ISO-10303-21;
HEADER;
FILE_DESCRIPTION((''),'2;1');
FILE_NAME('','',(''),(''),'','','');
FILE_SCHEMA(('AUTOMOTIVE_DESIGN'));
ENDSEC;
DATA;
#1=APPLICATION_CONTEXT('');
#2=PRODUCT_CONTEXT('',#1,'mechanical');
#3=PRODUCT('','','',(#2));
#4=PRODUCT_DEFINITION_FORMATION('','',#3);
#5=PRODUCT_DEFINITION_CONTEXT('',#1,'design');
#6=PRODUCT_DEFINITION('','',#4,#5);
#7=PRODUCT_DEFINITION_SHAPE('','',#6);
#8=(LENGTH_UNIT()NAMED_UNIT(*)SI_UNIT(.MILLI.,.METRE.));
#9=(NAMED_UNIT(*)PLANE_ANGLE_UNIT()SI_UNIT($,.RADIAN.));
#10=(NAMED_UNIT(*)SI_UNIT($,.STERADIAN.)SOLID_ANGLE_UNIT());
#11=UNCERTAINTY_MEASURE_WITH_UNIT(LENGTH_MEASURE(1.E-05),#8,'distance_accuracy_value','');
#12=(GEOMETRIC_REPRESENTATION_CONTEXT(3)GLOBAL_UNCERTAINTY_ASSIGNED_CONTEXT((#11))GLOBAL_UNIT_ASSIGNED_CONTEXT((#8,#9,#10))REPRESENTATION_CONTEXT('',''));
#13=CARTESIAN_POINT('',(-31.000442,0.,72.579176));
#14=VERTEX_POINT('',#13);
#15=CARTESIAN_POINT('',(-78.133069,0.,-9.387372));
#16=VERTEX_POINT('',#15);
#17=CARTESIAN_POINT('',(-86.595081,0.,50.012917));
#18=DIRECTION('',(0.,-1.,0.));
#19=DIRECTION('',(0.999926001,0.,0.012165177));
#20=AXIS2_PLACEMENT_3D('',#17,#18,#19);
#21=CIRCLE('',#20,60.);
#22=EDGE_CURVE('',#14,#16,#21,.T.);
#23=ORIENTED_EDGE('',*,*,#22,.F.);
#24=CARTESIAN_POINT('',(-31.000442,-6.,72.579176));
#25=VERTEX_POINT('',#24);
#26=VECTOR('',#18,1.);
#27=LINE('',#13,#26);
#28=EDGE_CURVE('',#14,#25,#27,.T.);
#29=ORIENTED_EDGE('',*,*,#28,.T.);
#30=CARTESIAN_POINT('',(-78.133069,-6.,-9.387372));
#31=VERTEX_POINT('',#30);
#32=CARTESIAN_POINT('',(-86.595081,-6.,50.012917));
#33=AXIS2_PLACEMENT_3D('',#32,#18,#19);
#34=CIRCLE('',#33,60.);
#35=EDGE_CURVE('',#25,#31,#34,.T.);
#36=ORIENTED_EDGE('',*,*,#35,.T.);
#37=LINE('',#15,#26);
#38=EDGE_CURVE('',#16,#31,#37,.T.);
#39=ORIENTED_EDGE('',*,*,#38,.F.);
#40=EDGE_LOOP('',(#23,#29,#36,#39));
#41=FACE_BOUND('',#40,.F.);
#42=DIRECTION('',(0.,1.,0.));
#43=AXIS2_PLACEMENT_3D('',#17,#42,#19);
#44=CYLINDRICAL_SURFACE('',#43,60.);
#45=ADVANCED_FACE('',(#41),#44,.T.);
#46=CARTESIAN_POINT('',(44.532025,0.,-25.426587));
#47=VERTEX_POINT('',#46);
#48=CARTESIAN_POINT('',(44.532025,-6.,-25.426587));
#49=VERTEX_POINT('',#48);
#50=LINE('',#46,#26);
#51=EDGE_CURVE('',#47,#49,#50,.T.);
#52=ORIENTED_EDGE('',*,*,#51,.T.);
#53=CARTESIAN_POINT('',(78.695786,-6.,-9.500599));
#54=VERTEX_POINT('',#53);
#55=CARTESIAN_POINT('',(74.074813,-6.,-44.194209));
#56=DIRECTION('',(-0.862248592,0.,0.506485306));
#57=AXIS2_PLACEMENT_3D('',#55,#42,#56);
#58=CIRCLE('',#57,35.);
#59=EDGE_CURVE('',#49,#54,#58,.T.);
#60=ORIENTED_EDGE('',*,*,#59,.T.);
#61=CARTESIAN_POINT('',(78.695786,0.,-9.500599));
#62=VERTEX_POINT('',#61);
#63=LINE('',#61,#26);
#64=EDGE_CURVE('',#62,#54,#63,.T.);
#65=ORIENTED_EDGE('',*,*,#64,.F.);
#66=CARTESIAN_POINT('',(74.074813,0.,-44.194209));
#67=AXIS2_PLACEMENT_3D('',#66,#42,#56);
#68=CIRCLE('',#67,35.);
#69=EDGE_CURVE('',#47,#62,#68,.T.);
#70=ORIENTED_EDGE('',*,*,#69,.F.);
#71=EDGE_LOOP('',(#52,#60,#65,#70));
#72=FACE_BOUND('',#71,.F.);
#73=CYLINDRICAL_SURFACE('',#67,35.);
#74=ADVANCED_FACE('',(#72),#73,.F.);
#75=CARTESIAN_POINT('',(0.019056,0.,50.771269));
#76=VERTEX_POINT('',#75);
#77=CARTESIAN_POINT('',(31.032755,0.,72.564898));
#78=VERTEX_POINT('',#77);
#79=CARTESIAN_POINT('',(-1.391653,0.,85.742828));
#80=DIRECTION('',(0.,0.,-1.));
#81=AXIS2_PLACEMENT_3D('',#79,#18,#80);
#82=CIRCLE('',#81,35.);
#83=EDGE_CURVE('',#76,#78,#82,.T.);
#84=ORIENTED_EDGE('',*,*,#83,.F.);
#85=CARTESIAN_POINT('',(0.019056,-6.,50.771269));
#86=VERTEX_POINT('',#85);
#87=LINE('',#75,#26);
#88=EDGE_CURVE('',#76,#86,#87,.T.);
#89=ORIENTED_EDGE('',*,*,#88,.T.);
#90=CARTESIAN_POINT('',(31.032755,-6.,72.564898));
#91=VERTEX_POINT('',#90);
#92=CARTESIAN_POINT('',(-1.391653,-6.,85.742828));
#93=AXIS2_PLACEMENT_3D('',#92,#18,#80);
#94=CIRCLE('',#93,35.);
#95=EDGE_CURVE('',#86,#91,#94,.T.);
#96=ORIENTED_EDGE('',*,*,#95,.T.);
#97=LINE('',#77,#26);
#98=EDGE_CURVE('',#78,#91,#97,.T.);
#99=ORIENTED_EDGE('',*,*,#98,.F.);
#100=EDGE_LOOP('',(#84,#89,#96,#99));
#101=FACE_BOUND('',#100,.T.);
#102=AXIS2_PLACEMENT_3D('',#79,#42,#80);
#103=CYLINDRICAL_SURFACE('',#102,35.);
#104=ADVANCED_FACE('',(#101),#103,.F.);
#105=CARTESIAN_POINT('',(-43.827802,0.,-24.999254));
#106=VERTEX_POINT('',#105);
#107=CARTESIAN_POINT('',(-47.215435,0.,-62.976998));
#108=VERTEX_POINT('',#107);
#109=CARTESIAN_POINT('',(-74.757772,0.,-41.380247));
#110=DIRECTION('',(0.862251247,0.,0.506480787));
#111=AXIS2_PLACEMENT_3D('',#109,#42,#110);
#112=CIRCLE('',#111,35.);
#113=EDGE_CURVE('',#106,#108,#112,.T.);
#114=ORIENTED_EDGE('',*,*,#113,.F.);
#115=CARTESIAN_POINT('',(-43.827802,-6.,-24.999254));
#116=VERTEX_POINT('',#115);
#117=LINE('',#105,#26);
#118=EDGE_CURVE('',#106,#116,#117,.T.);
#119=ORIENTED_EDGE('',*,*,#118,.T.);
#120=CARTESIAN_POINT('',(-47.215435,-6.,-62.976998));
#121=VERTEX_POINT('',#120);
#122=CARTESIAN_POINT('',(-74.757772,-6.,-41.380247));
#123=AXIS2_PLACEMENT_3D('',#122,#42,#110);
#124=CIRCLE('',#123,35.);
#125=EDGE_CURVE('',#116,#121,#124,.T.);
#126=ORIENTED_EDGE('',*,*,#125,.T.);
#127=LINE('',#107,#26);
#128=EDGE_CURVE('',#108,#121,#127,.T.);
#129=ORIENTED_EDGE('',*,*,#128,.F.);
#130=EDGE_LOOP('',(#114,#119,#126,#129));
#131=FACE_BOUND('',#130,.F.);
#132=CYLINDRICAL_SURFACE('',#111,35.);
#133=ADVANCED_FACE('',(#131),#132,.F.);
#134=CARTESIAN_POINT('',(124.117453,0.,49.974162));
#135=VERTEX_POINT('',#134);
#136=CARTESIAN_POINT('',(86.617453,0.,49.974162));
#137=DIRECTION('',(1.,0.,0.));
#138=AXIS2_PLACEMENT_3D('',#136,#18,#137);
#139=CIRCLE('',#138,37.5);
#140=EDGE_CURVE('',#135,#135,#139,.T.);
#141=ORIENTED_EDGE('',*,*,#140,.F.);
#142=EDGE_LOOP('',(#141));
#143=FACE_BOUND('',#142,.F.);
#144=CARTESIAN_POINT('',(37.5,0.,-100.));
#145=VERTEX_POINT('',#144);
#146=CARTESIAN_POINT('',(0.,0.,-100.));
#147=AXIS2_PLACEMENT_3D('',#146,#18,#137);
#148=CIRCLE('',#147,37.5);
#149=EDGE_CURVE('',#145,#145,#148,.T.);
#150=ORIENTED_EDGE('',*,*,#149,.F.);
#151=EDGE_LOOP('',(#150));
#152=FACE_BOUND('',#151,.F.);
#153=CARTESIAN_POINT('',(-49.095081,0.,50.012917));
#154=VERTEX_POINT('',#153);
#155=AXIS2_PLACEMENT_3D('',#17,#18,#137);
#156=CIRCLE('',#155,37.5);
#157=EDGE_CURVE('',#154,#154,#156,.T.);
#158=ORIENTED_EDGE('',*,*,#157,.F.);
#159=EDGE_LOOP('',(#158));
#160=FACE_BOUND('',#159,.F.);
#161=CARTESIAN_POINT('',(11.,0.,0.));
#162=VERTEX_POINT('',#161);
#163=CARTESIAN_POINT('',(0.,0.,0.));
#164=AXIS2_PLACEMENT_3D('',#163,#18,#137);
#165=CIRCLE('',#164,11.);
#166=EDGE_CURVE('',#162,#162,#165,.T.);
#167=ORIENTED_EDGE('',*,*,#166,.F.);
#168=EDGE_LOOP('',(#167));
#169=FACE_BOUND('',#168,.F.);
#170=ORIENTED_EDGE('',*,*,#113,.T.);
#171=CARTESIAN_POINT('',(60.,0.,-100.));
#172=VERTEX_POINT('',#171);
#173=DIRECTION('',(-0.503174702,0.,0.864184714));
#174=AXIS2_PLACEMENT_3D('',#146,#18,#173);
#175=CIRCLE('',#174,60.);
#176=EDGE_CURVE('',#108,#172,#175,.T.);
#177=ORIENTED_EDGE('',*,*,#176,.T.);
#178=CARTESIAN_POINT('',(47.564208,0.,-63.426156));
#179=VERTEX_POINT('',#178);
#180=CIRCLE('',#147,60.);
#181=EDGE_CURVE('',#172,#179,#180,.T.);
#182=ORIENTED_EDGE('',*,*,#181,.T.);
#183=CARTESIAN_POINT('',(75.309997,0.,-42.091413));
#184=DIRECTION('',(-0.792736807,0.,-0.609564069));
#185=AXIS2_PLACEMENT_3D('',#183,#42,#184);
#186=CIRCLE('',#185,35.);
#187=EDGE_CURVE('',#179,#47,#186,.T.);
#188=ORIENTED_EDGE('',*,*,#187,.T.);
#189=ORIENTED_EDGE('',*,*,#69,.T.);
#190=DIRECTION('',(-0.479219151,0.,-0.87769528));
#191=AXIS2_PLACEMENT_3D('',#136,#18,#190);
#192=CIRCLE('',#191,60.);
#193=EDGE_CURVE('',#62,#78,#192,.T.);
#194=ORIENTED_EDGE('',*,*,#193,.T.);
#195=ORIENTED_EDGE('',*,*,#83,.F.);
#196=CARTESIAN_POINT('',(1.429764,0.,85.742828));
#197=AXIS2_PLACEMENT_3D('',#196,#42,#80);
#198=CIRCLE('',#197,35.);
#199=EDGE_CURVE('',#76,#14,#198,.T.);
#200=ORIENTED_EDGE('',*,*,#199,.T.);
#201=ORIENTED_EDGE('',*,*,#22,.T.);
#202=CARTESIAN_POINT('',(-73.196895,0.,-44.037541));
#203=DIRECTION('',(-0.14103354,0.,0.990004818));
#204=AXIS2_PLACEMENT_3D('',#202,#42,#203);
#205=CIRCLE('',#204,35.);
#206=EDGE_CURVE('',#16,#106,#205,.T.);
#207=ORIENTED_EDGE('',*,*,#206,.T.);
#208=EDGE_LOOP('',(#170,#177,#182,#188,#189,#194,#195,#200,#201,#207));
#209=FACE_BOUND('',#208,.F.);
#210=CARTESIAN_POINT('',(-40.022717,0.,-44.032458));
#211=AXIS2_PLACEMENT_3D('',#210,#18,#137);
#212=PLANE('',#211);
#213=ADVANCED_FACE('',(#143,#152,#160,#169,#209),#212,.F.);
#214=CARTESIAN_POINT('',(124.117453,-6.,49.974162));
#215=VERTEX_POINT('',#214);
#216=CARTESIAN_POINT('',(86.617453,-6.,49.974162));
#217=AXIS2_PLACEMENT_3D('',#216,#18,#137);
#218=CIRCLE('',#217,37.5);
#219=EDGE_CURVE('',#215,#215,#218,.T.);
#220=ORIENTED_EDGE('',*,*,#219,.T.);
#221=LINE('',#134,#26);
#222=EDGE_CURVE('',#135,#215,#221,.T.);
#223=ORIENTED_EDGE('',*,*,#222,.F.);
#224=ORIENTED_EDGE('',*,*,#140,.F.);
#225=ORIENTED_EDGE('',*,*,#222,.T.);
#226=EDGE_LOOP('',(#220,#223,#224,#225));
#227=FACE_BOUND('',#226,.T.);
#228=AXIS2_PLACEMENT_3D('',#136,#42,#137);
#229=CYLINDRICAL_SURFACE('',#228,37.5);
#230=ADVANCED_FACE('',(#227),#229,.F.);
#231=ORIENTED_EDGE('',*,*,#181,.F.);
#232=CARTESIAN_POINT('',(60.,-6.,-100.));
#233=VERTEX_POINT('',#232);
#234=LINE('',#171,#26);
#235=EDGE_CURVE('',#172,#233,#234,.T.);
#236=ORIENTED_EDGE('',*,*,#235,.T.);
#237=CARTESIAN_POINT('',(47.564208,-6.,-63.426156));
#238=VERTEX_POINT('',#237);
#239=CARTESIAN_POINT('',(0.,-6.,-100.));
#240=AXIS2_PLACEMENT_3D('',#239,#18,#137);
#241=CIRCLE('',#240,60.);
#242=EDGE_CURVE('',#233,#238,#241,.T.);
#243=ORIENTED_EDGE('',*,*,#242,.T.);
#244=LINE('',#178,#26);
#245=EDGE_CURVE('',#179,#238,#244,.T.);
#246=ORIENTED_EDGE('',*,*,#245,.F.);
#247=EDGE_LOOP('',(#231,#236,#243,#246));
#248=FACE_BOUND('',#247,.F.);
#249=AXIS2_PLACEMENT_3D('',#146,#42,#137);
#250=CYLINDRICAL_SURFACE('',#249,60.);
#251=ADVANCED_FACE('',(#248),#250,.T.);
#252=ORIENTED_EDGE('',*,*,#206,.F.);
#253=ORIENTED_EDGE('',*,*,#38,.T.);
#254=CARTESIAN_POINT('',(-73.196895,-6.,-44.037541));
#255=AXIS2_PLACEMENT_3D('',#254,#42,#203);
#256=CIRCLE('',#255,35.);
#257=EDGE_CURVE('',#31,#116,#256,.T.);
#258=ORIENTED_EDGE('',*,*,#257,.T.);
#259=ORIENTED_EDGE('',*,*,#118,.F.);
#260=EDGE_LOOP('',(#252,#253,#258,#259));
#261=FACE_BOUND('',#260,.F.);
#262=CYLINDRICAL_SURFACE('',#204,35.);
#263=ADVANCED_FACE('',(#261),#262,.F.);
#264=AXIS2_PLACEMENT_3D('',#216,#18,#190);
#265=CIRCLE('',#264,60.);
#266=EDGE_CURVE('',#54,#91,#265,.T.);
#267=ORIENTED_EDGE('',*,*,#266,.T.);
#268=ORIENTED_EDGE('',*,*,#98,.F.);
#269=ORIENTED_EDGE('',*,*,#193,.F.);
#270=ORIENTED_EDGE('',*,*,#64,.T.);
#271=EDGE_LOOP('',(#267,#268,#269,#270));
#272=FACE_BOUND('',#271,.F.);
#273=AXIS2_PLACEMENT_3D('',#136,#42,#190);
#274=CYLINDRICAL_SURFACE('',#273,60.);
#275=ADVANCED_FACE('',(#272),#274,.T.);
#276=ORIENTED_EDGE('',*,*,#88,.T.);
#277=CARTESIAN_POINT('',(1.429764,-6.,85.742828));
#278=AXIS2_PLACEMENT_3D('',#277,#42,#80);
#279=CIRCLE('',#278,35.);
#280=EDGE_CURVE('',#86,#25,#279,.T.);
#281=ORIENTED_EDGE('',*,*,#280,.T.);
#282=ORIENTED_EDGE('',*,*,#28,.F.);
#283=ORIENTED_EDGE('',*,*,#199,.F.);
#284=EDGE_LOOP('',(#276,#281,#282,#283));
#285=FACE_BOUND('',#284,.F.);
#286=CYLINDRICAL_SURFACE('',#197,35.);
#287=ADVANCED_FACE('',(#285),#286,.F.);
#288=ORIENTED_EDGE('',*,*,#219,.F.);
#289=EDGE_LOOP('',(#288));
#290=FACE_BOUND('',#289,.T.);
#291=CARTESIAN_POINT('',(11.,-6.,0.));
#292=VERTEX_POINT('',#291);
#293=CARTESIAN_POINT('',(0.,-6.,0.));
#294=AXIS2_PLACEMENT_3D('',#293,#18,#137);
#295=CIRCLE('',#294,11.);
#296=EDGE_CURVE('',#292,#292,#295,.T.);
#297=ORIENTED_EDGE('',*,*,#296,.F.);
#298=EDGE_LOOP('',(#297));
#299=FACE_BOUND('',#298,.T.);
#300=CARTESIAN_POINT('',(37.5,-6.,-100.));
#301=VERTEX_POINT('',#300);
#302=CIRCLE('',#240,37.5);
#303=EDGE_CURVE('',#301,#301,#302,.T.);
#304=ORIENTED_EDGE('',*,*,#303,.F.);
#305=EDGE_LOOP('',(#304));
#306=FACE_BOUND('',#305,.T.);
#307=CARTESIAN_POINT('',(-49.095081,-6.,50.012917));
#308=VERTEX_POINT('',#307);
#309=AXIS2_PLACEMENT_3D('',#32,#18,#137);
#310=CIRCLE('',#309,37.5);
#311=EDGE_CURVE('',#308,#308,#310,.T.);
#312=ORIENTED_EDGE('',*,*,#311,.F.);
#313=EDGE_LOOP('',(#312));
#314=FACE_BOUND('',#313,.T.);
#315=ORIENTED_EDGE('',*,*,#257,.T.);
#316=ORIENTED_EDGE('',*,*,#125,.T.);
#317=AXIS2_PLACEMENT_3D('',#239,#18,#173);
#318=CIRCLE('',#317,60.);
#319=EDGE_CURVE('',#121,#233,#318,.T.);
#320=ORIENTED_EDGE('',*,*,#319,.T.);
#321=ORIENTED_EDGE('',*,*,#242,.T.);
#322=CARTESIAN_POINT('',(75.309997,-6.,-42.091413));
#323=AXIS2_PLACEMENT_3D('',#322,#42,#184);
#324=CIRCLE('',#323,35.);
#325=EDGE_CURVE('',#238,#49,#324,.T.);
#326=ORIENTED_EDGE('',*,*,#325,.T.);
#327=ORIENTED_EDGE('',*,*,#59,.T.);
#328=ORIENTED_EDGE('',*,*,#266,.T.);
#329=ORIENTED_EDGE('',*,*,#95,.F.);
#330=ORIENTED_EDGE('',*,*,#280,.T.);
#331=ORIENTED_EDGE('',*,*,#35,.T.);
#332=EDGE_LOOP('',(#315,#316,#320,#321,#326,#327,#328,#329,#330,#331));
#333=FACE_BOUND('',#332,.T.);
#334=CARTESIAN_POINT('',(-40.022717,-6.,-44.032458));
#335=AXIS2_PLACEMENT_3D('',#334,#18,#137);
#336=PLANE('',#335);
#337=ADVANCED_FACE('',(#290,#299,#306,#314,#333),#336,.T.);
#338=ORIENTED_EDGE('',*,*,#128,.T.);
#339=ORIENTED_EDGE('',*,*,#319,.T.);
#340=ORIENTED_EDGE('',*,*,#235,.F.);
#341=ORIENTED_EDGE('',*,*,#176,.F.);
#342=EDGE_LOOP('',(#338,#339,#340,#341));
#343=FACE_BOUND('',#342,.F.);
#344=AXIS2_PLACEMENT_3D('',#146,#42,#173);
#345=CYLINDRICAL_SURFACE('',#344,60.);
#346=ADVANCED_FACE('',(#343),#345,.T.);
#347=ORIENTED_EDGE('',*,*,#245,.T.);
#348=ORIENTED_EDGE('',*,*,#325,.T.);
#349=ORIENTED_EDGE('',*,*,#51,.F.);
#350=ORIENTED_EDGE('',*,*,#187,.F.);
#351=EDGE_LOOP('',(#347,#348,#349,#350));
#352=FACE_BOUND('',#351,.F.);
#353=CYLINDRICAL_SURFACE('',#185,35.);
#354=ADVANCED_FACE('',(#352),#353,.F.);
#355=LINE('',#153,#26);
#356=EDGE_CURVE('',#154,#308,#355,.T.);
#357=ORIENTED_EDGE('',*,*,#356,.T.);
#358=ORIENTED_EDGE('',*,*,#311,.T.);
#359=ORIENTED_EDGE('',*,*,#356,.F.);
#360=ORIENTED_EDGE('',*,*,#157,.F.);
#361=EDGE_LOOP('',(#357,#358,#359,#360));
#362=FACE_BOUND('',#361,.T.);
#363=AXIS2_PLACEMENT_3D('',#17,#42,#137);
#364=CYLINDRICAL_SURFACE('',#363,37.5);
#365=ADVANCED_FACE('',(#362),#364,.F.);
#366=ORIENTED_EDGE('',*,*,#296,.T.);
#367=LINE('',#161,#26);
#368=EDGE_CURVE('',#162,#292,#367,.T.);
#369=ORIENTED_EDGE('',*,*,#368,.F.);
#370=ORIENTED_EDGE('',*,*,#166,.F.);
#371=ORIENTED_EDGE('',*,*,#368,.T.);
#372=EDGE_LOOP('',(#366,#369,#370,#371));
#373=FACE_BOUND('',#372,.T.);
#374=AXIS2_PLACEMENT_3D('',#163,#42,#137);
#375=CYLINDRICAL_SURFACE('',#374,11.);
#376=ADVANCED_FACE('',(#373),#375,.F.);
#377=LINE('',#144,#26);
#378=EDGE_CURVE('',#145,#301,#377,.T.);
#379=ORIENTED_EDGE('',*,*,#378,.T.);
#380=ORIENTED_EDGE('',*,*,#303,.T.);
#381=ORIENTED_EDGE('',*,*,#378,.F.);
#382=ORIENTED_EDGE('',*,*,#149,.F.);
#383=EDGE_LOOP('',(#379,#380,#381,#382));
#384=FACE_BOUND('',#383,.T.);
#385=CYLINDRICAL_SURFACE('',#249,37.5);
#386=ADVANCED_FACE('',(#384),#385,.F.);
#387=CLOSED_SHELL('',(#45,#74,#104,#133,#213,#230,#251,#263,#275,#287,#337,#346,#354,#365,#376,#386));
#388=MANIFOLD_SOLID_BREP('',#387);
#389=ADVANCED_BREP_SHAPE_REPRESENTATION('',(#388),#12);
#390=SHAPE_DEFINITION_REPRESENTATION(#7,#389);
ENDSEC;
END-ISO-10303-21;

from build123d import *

# Parameters (mm, degrees)
F0_R        = 37.5
F0_R_2      = 11
F1_DEPTH    = 6
F2_T1_DEPTH = 6


# Not quite as in the source:
# - a fillet or chamfer that OpenCascade refuses, or shapes differently, is made with other operations: its cross-section is extruded or revolved along the edge and cut away or added


with BuildPart() as f1:
    # F0 (on Front) → F1 (new body)
    with BuildSketch(Plane.XZ):
        with BuildLine():
            ThreePointArc((57.8643034804, -2.6875543668), (117.2345315762, -1.6261715812), (146.617452556, 49.9741624513))
            ThreePointArc((146.617452556, 49.9741624513), (87.0017930869, 109.9729314583), (26.6223764775, 50.7428277423))
            ThreePointArc((26.6223764775, 50.7428277423), (34.8220541109, 19.6882465841), (57.8643034804, -2.6875543668))
        make_face()
        with Locations((86.617452556, 49.9741624513)):
            Circle(F0_R, mode=Mode.SUBTRACT)
        with BuildLine():
            ThreePointArc((-26.5950813994, 50.0129171058), (-26.5961913872, 50.3778791758), (-26.5995213098, 50.7428277423))
            ThreePointArc((-26.5995213098, 50.7428277423), (-138.5810142586, 79.97060034), (-57.1442597977, -2.261829254))
            ThreePointArc((-57.1442597977, -2.261829254), (-34.7923339042, 19.7395731883), (-26.5950813994, 50.0129171058))
        make_face()
        with Locations((-86.5950813994, 50.0129171058)):
            Circle(F0_R, mode=Mode.SUBTRACT)
        with BuildLine():
            ThreePointArc((57.8643034804, -2.6875543668), (34.8220541109, 19.6882465841), (26.6223764775, 50.7428277423))
            Line((26.6223764775, 50.7428277423), (-26.5995213098, 50.7428277423))
            ThreePointArc((-26.5995213098, 50.7428277423), (-26.5961913872, 50.3778791758), (-26.5950813994, 50.0129171058))
            ThreePointArc((-26.5950813994, 50.0129171058), (-34.7923339042, 19.7395731883), (-57.1442597977, -2.261829254))
            Line((-57.1442597977, -2.261829254), (-30.1904821111, -48.1489171772))
            ThreePointArc((-30.1904821111, -48.1489171772), (0.418102689, -40.0014567665), (30.9101684744, -48.5746999534))
            Line((30.9101684744, -48.5746999534), (57.8643034804, -2.6875543668))
        make_face()
        Circle(F0_R_2, mode=Mode.SUBTRACT)
        with BuildLine():
            ThreePointArc((60, -100), (52.2236062929, -70.4585893064), (30.9101684744, -48.5746999534))
            ThreePointArc((30.9101684744, -48.5746999534), (0.418102689, -40.0014567665), (-30.1904821111, -48.1489171772))
            ThreePointArc((-30.1904821111, -48.1489171772), (-29.9046072816, -152.0164826121), (60, -100))
        make_face()
        with Locations((0, -100)):
            Circle(F0_R, mode=Mode.SUBTRACT)
    extrude(amount=F1_DEPTH)

    # F2: fillet of radius 35 on 6 edges, made by hand

    # F2_s2 → F2_t1 (join)
    with BuildSketch(Plane.XZ):
        with BuildLine():
            ThreePointArc((-44.5789786986, -23.6534191556), (-39.8361716067, -43.7215717477), (-47.2154351555, -62.9769979192))
            ThreePointArc((-47.2154351555, -62.9769979192), (-39.40668727, -54.7549671411), (-30.1904821111, -48.1489171772))
            Line((-30.1904821111, -48.1489171772), (-44.5789786986, -23.6534191556))
        make_face()
        with BuildLine():
            ThreePointArc((-1.3916525599, 50.7428277423), (18.1502571968, 56.7064064225), (31.0327545881, 72.5648984246))
            ThreePointArc((31.0327545881, 72.5648984246), (27.8065544641, 61.8602158597), (26.6223764775, 50.7428277423))
            Line((26.6223764775, 50.7428277423), (-1.3916525599, 50.7428277423))
        make_face()
        with BuildLine():
            ThreePointArc((1.4297644449, 50.7428277423), (-18.1185373349, 56.7107093642), (-31.0004419188, 72.5791764552))
            ThreePointArc((-31.0004419188, 72.5791764552), (-27.7777362498, 61.8670265011), (-26.5995213098, 50.7428277423))
            Line((-26.5995213098, 50.7428277423), (1.4297644449, 50.7428277423))
        make_face()
        with BuildLine():
            ThreePointArc((43.89611258, -26.4672233966), (58.7364313951, -12.7341703185), (78.6957856647, -9.500598529))
            ThreePointArc((78.6957856647, -9.500598529), (67.9663152116, -7.0533315824), (57.8643034804, -2.6875543668))
            Line((57.8643034804, -2.6875543668), (43.89611258, -26.4672233966))
        make_face()
        with BuildLine():
            ThreePointArc((47.5642084271, -63.4261558392), (40.3776870322, -44.2671300594), (45.1312959448, -24.3644277078))
            Line((45.1312959448, -24.3644277078), (30.9101684744, -48.5746999534))
            ThreePointArc((30.9101684744, -48.5746999534), (39.9336749248, -55.2194059106), (47.5642084271, -63.4261558392))
        make_face()
        with BuildLine():
            ThreePointArc((-78.1330690057, -9.3873720033), (-58.0015888855, -12.5081469238), (-43.0181014785, -26.3107131005))
            Line((-43.0181014785, -26.3107131005), (-57.1442597977, -2.261829254))
            ThreePointArc((-57.1442597977, -2.261829254), (-67.3067666659, -6.8022297719), (-78.1330690057, -9.3873720033))
        make_face()
    extrude(amount=F2_T1_DEPTH)


solid = f1.part
